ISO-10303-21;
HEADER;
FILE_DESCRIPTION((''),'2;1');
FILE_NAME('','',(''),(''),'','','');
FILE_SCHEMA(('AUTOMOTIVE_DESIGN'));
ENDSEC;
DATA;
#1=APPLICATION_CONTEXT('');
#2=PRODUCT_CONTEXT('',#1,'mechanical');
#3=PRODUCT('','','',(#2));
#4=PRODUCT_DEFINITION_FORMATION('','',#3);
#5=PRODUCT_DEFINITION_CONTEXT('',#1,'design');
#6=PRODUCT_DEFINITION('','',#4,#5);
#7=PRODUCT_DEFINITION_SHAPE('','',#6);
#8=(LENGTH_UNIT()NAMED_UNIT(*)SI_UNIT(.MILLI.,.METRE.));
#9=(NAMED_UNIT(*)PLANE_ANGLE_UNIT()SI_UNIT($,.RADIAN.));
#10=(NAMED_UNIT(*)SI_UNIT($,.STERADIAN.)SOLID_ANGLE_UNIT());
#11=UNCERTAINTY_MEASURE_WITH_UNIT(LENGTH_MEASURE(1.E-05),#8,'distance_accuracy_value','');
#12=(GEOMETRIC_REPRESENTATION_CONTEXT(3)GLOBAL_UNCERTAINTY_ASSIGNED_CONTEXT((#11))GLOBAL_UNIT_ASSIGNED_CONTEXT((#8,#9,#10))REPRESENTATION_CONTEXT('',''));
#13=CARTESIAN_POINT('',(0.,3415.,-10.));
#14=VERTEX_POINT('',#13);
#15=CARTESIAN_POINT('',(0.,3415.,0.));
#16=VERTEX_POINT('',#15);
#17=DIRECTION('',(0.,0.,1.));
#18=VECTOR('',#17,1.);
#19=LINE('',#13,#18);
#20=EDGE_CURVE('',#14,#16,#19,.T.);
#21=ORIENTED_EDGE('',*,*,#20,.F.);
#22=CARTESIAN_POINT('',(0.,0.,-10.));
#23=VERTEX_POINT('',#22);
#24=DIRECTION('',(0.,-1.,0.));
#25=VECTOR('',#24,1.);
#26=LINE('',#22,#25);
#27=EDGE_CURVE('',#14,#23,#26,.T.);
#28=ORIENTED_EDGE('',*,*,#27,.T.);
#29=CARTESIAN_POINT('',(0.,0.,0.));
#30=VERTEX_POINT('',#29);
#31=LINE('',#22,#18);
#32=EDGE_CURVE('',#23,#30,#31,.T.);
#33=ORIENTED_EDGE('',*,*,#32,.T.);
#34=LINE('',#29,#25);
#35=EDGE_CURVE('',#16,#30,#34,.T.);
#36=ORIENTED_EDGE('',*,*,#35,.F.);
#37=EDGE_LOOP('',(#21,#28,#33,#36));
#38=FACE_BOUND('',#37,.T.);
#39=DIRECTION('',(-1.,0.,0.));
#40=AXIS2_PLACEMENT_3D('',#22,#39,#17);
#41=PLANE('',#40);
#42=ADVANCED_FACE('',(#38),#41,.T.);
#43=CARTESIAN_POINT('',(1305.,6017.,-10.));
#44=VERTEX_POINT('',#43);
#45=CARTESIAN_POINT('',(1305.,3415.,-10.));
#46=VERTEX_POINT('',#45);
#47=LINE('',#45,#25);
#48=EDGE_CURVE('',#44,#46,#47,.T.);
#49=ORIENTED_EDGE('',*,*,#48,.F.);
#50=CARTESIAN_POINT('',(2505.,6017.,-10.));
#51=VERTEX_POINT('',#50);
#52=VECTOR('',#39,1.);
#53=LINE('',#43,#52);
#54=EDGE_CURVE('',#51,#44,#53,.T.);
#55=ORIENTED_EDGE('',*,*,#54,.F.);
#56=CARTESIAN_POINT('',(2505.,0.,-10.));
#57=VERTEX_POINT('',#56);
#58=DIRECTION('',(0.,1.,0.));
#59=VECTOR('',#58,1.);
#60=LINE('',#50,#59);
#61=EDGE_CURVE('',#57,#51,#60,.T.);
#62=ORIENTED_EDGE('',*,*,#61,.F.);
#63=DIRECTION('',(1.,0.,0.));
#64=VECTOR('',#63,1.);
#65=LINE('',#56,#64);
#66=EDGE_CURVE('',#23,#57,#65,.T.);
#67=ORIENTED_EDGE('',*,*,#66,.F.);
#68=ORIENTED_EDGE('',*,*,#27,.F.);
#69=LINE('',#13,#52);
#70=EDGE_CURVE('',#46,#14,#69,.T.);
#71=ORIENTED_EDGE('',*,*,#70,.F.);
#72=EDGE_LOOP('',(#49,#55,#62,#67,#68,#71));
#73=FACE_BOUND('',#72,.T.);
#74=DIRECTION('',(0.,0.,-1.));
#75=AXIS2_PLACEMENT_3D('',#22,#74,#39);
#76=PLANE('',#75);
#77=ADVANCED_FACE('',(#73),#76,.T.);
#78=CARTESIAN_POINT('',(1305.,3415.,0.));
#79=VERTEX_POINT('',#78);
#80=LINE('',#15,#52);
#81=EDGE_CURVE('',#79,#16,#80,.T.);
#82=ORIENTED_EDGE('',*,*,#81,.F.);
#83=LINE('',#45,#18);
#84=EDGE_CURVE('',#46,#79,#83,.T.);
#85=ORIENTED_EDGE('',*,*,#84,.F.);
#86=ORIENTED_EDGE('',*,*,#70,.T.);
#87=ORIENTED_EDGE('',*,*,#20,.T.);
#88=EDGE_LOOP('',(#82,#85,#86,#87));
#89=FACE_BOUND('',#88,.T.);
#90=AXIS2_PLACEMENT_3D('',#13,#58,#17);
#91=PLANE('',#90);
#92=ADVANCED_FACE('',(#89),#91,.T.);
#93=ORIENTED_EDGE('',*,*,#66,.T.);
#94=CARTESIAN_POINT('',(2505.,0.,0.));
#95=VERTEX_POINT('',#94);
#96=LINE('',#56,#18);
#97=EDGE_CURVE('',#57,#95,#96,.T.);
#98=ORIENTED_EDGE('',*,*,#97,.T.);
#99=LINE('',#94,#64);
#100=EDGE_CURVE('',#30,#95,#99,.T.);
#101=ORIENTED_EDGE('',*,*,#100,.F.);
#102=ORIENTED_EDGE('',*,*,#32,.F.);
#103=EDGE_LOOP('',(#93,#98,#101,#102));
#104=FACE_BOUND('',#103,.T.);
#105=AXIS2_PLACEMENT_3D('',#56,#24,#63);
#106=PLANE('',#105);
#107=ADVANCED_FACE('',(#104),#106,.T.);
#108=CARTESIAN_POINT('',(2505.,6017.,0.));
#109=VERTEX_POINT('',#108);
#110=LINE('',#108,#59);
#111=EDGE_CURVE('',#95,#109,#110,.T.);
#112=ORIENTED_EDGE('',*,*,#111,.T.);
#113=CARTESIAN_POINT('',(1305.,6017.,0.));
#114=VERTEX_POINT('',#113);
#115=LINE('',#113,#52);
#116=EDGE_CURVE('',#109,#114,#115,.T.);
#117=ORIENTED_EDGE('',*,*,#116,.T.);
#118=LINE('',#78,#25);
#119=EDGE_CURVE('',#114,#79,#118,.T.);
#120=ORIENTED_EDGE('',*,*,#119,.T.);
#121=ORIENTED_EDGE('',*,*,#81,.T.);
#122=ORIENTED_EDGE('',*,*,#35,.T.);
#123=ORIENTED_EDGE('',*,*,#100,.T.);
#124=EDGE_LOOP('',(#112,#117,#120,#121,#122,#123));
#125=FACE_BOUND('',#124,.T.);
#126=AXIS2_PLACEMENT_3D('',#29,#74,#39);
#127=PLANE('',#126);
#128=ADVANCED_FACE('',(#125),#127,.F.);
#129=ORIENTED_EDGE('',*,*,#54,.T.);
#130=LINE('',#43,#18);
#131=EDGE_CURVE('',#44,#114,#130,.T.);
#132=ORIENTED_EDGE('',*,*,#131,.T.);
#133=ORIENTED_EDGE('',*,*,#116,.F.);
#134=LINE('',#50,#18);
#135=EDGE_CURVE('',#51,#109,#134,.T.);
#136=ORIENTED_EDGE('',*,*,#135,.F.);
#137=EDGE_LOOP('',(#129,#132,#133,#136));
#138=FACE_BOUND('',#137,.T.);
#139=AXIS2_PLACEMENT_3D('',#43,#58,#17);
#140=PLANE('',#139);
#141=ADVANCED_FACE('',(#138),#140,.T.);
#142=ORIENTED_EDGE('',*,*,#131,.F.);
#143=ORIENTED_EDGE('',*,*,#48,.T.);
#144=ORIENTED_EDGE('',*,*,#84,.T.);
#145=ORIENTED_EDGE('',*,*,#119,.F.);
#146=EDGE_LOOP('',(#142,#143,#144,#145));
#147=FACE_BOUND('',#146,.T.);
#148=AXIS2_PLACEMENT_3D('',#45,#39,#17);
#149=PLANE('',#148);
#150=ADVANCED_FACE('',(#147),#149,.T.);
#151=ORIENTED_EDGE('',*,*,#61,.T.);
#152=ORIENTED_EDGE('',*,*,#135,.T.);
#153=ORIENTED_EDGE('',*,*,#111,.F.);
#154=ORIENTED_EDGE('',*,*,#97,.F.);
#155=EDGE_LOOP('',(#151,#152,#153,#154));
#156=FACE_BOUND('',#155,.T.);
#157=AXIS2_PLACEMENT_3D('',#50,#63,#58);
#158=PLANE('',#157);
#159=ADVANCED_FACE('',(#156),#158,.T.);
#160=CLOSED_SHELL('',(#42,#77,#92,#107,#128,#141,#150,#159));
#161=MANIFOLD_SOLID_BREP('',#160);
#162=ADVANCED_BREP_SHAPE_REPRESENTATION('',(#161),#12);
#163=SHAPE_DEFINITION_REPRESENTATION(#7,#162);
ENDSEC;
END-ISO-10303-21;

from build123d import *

# Parameters (mm, degrees)
TABAN_FLAN_1_DEPTH = 10


# Sheet-metal steps are written as plain solids
with BuildPart() as part:
    # Çizim1 → Taban-Flanş1 (new body)
    with BuildSketch(Plane.XY):
        Polygon((0, 0), (0, 3415), (1305, 3415), (1305, 6017), (2505, 6017), (2505, 0), align=None)
    extrude(amount=-TABAN_FLAN_1_DEPTH)


solid = part.part
